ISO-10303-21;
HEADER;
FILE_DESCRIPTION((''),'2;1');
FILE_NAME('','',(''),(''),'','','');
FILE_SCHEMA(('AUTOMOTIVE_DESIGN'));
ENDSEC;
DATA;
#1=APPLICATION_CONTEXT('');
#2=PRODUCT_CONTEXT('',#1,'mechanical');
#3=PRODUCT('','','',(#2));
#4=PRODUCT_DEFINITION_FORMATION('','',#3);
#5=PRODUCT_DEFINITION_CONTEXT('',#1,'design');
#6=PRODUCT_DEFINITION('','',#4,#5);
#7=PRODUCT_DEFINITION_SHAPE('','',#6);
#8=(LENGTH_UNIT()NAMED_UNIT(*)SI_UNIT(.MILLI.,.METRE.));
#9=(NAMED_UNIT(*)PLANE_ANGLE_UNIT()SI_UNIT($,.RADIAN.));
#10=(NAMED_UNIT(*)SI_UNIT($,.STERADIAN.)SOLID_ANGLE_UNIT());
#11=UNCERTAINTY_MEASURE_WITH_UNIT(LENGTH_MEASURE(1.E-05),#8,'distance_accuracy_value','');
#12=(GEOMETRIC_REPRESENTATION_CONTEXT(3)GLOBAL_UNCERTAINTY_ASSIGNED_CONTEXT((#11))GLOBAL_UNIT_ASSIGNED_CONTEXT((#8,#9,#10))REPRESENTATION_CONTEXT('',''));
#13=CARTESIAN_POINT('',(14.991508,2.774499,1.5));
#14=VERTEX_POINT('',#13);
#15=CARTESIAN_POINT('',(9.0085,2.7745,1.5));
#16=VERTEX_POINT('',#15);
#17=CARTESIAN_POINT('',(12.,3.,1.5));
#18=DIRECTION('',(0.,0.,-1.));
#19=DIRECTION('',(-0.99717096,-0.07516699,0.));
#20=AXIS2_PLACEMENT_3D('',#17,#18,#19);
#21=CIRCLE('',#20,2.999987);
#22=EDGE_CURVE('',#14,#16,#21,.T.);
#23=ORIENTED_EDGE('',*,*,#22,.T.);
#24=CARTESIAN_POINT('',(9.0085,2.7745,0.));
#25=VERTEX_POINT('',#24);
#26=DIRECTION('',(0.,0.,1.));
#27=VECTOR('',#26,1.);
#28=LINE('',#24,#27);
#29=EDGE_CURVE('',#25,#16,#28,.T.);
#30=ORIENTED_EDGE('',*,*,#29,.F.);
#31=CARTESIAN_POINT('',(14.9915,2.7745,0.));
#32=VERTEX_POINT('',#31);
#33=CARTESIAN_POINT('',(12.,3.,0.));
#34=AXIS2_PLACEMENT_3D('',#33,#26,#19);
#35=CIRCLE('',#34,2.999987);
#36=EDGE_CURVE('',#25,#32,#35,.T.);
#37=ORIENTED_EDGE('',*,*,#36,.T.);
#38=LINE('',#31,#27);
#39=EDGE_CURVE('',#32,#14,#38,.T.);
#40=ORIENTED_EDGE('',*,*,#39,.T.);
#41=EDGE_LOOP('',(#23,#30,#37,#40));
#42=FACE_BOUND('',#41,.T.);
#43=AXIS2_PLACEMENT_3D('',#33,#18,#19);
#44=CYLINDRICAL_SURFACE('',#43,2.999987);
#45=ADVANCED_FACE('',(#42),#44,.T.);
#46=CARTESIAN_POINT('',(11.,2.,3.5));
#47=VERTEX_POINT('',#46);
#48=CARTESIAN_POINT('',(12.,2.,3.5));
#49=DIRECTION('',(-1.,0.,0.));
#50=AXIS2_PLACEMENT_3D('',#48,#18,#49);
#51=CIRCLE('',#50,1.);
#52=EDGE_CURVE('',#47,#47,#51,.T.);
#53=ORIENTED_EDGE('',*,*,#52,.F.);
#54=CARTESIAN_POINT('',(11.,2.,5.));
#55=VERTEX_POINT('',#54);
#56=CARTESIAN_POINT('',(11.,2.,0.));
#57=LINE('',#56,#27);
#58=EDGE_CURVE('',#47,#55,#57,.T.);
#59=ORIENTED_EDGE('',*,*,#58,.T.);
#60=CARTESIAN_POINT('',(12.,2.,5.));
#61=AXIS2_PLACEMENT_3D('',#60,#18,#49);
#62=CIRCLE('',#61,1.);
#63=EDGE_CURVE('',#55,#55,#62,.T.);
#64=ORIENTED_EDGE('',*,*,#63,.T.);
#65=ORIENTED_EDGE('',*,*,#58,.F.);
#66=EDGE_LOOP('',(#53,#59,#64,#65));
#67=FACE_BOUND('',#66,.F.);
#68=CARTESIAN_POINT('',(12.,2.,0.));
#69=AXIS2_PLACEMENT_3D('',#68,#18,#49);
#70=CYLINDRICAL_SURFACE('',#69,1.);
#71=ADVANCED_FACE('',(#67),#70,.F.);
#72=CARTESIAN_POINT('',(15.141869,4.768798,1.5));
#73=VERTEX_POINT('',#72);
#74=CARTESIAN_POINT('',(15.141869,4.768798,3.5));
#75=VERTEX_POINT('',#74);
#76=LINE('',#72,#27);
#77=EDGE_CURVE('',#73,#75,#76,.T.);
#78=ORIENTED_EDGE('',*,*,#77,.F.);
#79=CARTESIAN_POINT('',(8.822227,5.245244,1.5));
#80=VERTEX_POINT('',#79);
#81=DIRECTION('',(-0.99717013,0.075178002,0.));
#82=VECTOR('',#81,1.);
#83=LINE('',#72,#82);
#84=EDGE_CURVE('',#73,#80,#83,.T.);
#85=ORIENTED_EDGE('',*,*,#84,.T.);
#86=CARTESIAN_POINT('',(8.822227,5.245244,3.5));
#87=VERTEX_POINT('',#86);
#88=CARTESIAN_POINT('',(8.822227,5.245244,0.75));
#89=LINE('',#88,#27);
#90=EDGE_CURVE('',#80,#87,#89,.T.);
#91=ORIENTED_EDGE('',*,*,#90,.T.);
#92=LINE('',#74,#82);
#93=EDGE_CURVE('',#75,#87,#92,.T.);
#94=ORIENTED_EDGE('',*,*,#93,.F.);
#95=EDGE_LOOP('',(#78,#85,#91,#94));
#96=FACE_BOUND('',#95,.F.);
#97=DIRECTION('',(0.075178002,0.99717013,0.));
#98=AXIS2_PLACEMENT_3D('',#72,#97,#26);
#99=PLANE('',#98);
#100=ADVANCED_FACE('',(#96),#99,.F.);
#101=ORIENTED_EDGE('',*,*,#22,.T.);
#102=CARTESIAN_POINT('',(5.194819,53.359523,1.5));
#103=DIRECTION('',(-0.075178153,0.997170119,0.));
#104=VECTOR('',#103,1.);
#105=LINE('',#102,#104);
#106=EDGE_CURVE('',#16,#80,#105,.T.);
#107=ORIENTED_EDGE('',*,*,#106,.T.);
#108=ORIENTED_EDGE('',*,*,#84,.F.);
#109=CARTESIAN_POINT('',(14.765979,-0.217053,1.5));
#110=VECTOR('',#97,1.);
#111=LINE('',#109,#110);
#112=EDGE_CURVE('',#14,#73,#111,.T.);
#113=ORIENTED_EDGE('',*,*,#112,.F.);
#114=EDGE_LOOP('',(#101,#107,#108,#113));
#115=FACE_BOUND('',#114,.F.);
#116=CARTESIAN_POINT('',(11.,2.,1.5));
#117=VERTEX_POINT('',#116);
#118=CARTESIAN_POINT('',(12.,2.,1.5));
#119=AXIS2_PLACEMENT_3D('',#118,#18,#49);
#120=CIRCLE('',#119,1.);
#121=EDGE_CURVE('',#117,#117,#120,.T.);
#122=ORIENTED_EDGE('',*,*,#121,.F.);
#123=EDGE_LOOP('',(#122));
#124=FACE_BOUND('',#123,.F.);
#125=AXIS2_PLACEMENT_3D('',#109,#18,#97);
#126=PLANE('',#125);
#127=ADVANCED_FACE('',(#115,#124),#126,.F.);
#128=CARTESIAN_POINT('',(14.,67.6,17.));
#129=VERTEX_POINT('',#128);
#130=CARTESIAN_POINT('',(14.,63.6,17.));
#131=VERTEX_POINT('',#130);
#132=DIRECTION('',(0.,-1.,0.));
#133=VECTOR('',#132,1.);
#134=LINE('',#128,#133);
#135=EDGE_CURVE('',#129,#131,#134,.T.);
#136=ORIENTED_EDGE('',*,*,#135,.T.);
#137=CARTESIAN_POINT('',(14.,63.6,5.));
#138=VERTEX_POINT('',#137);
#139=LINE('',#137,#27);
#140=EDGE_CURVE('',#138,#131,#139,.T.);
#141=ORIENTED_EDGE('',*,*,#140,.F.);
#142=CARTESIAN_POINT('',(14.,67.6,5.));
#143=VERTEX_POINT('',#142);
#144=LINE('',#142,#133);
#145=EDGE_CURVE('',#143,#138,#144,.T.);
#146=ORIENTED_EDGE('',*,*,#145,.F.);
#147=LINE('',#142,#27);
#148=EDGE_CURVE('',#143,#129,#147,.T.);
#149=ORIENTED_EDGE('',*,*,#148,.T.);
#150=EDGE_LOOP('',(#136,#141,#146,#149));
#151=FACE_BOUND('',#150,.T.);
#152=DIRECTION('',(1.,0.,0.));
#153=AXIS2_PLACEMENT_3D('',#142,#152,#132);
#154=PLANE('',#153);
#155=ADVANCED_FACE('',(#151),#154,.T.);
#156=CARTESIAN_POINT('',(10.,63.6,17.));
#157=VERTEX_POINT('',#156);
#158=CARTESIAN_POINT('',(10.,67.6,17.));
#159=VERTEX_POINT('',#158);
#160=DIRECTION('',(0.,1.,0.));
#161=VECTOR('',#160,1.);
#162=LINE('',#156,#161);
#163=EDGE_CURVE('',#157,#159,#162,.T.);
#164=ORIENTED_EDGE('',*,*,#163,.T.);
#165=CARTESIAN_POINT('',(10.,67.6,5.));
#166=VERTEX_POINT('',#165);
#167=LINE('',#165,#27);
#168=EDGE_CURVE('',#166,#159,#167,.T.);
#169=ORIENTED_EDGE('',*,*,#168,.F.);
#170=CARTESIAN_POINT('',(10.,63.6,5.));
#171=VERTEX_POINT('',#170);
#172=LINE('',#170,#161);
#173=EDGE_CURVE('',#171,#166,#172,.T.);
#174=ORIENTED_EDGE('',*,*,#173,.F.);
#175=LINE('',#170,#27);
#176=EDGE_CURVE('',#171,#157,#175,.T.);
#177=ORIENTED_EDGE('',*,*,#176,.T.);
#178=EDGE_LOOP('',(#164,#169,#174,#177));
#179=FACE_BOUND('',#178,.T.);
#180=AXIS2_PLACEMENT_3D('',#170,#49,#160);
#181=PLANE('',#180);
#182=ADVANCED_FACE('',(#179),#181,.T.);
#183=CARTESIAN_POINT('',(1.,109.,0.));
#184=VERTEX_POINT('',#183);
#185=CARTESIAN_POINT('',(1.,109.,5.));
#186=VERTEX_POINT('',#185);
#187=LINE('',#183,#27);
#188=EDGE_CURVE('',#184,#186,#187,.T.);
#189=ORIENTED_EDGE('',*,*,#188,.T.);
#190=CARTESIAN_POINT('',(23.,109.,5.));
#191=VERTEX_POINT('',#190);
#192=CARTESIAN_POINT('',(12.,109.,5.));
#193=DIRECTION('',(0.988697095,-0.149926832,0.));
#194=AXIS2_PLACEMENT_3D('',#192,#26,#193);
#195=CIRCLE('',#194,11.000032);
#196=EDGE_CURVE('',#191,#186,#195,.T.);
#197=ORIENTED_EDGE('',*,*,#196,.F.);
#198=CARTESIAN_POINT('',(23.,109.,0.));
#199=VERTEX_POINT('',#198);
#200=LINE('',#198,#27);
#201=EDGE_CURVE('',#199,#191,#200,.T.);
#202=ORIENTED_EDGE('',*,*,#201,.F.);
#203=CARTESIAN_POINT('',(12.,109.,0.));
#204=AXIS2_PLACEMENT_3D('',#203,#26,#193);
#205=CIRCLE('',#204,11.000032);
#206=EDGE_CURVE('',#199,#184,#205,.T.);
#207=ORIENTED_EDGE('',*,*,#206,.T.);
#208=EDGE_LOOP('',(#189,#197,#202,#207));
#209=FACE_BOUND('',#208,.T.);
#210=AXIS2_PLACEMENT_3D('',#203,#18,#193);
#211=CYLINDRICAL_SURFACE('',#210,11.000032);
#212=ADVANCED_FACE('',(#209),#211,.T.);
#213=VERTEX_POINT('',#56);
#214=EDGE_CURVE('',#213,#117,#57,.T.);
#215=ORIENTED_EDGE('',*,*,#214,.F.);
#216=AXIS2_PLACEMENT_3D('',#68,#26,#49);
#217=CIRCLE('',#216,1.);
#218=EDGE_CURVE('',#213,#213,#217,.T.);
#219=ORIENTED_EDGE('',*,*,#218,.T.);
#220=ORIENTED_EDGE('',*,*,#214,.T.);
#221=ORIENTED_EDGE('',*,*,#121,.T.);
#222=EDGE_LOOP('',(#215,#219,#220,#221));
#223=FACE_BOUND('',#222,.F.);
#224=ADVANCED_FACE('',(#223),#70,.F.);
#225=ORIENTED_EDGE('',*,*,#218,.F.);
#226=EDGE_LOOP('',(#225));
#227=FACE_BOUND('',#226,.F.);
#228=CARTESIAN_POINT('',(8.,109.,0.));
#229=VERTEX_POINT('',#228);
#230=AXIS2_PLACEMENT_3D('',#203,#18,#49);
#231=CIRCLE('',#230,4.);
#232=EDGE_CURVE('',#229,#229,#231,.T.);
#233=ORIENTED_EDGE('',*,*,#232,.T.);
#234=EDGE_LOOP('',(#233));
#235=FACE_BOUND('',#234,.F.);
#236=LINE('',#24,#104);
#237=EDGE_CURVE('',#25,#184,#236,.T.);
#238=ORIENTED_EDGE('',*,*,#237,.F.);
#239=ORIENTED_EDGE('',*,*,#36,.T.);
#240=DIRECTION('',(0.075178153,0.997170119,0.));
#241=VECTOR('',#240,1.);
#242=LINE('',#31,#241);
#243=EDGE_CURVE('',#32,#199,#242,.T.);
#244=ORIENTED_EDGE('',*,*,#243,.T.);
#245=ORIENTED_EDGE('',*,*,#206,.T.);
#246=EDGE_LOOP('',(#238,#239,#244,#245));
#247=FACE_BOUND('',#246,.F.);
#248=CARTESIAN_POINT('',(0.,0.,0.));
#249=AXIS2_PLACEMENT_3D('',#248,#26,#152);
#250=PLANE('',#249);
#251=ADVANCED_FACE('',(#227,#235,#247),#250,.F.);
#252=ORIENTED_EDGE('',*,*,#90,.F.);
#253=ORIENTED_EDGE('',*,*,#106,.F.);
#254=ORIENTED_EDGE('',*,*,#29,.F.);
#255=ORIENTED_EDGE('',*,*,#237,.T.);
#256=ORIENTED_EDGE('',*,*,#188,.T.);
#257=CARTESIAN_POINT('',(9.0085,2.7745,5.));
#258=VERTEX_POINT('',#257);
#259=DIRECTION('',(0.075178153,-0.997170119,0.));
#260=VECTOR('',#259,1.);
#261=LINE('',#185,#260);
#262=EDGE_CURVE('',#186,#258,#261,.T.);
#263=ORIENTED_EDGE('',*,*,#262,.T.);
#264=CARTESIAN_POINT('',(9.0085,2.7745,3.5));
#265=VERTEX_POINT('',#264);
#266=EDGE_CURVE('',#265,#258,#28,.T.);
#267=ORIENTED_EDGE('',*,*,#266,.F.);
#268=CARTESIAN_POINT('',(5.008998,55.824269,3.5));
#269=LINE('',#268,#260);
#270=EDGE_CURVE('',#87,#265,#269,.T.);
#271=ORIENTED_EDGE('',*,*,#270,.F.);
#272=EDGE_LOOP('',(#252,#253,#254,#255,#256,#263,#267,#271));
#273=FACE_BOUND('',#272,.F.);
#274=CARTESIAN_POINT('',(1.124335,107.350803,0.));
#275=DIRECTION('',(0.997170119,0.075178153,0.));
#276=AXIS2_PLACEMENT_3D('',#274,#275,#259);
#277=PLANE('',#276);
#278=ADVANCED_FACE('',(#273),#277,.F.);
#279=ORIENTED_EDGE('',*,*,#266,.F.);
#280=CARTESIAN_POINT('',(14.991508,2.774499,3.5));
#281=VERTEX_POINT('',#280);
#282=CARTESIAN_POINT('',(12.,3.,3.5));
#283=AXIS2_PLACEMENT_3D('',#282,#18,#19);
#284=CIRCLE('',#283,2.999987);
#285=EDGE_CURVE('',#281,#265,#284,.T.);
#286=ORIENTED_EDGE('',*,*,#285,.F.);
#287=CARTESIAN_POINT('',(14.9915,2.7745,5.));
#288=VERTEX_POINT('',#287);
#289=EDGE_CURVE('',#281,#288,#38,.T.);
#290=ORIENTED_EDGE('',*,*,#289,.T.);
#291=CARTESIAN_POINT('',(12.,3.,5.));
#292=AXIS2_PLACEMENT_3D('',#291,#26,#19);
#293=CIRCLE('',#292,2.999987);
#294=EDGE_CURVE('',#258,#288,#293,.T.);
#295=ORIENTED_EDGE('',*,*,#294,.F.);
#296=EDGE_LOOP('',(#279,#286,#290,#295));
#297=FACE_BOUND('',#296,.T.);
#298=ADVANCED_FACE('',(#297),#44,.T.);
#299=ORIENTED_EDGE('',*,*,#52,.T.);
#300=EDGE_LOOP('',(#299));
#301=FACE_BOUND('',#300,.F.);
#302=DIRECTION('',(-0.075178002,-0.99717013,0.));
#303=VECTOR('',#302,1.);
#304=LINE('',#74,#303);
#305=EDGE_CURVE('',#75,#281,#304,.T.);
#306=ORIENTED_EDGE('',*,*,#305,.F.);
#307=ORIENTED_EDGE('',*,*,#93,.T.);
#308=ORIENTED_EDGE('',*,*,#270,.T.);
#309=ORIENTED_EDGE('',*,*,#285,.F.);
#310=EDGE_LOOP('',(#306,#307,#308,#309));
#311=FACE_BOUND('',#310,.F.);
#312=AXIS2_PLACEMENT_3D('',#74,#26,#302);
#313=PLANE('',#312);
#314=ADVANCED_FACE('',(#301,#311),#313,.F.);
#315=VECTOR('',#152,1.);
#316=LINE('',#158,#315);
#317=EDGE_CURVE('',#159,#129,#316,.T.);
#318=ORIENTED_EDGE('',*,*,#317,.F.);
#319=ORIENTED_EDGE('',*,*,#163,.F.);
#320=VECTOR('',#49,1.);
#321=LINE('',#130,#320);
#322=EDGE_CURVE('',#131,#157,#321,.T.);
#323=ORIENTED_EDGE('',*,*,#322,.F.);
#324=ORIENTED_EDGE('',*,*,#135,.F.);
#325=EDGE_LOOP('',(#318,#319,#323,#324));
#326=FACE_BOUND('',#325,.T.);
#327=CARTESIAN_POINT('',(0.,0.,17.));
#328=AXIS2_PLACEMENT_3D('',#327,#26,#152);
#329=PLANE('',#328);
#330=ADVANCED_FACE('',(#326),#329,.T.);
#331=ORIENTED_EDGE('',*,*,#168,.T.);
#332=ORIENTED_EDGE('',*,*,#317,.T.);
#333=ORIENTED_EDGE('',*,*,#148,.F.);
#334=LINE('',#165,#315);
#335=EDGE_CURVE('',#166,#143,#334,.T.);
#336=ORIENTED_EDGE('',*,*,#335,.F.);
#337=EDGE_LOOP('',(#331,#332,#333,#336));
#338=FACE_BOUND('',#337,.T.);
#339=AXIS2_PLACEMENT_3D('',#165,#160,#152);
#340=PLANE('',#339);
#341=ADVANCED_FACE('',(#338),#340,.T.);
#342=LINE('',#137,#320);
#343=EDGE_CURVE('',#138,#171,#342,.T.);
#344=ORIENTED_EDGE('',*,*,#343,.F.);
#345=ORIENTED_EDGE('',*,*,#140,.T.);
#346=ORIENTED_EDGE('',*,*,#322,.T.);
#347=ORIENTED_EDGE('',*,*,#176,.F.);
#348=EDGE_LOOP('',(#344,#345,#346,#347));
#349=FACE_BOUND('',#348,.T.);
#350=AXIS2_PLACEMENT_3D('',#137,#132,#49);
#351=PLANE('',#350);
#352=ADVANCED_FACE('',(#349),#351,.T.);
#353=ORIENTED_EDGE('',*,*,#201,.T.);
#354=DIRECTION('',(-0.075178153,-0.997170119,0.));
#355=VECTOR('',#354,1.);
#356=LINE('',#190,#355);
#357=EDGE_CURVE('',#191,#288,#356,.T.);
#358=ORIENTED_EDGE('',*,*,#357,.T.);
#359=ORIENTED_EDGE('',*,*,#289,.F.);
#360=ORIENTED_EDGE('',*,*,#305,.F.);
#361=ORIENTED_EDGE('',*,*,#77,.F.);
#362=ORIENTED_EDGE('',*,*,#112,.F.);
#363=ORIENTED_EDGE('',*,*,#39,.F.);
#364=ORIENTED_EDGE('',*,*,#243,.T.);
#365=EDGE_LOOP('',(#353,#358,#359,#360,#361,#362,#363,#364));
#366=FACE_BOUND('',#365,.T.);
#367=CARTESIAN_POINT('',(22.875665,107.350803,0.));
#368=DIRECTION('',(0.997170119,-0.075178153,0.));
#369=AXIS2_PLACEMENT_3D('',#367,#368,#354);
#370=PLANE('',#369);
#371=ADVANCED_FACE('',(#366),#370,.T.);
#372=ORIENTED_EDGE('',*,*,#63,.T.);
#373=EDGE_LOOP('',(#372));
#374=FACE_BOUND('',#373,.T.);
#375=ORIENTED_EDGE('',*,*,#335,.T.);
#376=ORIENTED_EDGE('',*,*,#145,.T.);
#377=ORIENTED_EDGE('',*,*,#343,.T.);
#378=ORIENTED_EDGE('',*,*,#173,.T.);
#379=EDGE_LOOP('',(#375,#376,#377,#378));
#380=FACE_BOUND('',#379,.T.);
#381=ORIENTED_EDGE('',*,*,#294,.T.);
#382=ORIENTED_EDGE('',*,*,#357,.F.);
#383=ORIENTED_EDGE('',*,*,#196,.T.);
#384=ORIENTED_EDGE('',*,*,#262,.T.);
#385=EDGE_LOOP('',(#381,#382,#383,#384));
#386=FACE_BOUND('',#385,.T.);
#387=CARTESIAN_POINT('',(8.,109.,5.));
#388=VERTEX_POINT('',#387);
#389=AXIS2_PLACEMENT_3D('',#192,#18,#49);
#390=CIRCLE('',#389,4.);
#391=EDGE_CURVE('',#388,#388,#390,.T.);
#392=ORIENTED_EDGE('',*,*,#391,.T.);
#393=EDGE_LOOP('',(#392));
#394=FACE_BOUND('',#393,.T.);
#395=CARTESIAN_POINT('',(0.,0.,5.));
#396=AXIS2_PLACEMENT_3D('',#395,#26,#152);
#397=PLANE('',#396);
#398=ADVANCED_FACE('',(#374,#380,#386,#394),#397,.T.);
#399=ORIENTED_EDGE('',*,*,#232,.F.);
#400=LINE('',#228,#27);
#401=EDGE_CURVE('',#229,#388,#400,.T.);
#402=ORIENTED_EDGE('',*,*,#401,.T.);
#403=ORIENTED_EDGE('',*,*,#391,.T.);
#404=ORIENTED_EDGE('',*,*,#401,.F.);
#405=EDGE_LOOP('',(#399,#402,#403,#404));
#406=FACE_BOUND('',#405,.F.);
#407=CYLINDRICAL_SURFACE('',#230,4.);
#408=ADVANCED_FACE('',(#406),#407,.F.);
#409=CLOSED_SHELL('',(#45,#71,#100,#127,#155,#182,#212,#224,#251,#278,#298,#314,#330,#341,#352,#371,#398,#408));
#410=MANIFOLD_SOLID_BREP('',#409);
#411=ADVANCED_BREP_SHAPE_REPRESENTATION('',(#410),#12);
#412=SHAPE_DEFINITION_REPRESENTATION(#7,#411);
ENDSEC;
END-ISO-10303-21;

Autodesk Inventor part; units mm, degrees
ref_plane "YZ Plane" through (0, 0, 0) normal (1, 0, 0) x (0, 1, 0)
ref_plane "XZ Plane" through (0, 0, 0) normal (0, 1, 0) x (-1, 0, 0)
ref_plane "XY Plane" through (0, 0, 0) normal (0, 0, 1) x (1, 0, 0)
sketch "Esquisse1" plane through (0, 0, 0) normal (0, 0, 1) x (1, 0, 0)
  arc A0 (22.8757, 107.3508) -> (1.1243, 107.3508) centre (12, 109) ccw
  arc A1 (9.0085, 2.7745) -> (14.9915, 2.7745) centre (12, 3) ccw
  line L0 (1, 109) -> (9.0085, 2.7745)
  line L1 (23, 109) -> (14.9915, 2.7745)
  point P0 (0, 0)
  dimension "d2" = 22
extrude "Extrusion1" add sketch "Esquisse1" along normal blind 5 contours L1 A1 L0 A0
sketch "Esquisse2" plane through (23, 109, 5) normal (0.9971701, -0.075178, 0) x (0, 0, -1)
  line L0 (5, -109.527) -> (0, -109.527) projected
  line L1 (2.5, -109.527) -> (1.5, -109.527)
  line L2 (2.5, -109.527) -> (3.5, -109.527)
  line L3 (3.5, -109.527) -> (3.5, -104.527)
  line L4 (3.5, -104.527) -> (1.5, -104.527)
  line L5 (1.5, -104.527) -> (1.5, -109.527)
  point P0 (5, -110.4206)
  dimension "d6" = 1
  dimension "d7" = 1
  dimension "d8" = 5
  dimension "d9" = 2
extrude "Extrusion2" cut sketch "Esquisse2" against normal through all
sketch "Esquisse3" plane through (0, 0, 0) normal (0, 0, -1) x (-1, 0, 0)
  arc A0 (-14.9915, 2.7745) -> (-9.0085, 2.7745) centre (-12, 3) ccw projected
  arc A1 (-1, 109) -> (-23, 109) centre (-12, 109) ccw projected
  circle A2 centre (-12, 109) radius 4
  arc A3 (-14.9915, 2.7745) -> (-9.0085, 2.7745) centre (-12, 3) ccw projected
  line L0 (-12, 0) -> (-12, 2)
  circle A4 centre (-12, 2) radius 1
  line L1 (-14.8284, 2) -> (-9.1716, 2)
  point P0 (0, 0)
  dimension "d13" = 8
  dimension "d24" = 2
  dimension "d25" = 2
  dimension "d26" = 5.6569
extrude "Extrusion3" cut sketch "Esquisse3" against normal through all contours L1 L0 A4 | A4 L1 | L0 L1 A4 | A2
sketch "Esquisse8" plane through (0, 0, 5) normal (0, 0, 1) x (1, 0, 0)
  circle A0 centre (12, 109) radius 4 projected
  line L0 (12, 109) -> (12, 65.6)
  line L1 (12, 65.6) -> (12, 67.6)
  line L2 (12, 67.6) -> (14, 67.6)
  line L3 (14, 67.6) -> (14, 63.6)
  line L4 (14, 63.6) -> (10, 63.6)
  line L5 (10, 63.6) -> (10, 67.6)
  line L6 (10, 67.6) -> (12, 67.6)
  point P0 (0, 0)
  dimension "d27" = 43.4
  dimension "d29" = 2
  dimension "d30" = 2
  dimension "d31" = 4
  dimension "d32" = 4
extrude "Extrusion5" add sketch "Esquisse8" along normal blind 12 contours L2 L3 L4 L5 L6
properties part number "Jambe"
